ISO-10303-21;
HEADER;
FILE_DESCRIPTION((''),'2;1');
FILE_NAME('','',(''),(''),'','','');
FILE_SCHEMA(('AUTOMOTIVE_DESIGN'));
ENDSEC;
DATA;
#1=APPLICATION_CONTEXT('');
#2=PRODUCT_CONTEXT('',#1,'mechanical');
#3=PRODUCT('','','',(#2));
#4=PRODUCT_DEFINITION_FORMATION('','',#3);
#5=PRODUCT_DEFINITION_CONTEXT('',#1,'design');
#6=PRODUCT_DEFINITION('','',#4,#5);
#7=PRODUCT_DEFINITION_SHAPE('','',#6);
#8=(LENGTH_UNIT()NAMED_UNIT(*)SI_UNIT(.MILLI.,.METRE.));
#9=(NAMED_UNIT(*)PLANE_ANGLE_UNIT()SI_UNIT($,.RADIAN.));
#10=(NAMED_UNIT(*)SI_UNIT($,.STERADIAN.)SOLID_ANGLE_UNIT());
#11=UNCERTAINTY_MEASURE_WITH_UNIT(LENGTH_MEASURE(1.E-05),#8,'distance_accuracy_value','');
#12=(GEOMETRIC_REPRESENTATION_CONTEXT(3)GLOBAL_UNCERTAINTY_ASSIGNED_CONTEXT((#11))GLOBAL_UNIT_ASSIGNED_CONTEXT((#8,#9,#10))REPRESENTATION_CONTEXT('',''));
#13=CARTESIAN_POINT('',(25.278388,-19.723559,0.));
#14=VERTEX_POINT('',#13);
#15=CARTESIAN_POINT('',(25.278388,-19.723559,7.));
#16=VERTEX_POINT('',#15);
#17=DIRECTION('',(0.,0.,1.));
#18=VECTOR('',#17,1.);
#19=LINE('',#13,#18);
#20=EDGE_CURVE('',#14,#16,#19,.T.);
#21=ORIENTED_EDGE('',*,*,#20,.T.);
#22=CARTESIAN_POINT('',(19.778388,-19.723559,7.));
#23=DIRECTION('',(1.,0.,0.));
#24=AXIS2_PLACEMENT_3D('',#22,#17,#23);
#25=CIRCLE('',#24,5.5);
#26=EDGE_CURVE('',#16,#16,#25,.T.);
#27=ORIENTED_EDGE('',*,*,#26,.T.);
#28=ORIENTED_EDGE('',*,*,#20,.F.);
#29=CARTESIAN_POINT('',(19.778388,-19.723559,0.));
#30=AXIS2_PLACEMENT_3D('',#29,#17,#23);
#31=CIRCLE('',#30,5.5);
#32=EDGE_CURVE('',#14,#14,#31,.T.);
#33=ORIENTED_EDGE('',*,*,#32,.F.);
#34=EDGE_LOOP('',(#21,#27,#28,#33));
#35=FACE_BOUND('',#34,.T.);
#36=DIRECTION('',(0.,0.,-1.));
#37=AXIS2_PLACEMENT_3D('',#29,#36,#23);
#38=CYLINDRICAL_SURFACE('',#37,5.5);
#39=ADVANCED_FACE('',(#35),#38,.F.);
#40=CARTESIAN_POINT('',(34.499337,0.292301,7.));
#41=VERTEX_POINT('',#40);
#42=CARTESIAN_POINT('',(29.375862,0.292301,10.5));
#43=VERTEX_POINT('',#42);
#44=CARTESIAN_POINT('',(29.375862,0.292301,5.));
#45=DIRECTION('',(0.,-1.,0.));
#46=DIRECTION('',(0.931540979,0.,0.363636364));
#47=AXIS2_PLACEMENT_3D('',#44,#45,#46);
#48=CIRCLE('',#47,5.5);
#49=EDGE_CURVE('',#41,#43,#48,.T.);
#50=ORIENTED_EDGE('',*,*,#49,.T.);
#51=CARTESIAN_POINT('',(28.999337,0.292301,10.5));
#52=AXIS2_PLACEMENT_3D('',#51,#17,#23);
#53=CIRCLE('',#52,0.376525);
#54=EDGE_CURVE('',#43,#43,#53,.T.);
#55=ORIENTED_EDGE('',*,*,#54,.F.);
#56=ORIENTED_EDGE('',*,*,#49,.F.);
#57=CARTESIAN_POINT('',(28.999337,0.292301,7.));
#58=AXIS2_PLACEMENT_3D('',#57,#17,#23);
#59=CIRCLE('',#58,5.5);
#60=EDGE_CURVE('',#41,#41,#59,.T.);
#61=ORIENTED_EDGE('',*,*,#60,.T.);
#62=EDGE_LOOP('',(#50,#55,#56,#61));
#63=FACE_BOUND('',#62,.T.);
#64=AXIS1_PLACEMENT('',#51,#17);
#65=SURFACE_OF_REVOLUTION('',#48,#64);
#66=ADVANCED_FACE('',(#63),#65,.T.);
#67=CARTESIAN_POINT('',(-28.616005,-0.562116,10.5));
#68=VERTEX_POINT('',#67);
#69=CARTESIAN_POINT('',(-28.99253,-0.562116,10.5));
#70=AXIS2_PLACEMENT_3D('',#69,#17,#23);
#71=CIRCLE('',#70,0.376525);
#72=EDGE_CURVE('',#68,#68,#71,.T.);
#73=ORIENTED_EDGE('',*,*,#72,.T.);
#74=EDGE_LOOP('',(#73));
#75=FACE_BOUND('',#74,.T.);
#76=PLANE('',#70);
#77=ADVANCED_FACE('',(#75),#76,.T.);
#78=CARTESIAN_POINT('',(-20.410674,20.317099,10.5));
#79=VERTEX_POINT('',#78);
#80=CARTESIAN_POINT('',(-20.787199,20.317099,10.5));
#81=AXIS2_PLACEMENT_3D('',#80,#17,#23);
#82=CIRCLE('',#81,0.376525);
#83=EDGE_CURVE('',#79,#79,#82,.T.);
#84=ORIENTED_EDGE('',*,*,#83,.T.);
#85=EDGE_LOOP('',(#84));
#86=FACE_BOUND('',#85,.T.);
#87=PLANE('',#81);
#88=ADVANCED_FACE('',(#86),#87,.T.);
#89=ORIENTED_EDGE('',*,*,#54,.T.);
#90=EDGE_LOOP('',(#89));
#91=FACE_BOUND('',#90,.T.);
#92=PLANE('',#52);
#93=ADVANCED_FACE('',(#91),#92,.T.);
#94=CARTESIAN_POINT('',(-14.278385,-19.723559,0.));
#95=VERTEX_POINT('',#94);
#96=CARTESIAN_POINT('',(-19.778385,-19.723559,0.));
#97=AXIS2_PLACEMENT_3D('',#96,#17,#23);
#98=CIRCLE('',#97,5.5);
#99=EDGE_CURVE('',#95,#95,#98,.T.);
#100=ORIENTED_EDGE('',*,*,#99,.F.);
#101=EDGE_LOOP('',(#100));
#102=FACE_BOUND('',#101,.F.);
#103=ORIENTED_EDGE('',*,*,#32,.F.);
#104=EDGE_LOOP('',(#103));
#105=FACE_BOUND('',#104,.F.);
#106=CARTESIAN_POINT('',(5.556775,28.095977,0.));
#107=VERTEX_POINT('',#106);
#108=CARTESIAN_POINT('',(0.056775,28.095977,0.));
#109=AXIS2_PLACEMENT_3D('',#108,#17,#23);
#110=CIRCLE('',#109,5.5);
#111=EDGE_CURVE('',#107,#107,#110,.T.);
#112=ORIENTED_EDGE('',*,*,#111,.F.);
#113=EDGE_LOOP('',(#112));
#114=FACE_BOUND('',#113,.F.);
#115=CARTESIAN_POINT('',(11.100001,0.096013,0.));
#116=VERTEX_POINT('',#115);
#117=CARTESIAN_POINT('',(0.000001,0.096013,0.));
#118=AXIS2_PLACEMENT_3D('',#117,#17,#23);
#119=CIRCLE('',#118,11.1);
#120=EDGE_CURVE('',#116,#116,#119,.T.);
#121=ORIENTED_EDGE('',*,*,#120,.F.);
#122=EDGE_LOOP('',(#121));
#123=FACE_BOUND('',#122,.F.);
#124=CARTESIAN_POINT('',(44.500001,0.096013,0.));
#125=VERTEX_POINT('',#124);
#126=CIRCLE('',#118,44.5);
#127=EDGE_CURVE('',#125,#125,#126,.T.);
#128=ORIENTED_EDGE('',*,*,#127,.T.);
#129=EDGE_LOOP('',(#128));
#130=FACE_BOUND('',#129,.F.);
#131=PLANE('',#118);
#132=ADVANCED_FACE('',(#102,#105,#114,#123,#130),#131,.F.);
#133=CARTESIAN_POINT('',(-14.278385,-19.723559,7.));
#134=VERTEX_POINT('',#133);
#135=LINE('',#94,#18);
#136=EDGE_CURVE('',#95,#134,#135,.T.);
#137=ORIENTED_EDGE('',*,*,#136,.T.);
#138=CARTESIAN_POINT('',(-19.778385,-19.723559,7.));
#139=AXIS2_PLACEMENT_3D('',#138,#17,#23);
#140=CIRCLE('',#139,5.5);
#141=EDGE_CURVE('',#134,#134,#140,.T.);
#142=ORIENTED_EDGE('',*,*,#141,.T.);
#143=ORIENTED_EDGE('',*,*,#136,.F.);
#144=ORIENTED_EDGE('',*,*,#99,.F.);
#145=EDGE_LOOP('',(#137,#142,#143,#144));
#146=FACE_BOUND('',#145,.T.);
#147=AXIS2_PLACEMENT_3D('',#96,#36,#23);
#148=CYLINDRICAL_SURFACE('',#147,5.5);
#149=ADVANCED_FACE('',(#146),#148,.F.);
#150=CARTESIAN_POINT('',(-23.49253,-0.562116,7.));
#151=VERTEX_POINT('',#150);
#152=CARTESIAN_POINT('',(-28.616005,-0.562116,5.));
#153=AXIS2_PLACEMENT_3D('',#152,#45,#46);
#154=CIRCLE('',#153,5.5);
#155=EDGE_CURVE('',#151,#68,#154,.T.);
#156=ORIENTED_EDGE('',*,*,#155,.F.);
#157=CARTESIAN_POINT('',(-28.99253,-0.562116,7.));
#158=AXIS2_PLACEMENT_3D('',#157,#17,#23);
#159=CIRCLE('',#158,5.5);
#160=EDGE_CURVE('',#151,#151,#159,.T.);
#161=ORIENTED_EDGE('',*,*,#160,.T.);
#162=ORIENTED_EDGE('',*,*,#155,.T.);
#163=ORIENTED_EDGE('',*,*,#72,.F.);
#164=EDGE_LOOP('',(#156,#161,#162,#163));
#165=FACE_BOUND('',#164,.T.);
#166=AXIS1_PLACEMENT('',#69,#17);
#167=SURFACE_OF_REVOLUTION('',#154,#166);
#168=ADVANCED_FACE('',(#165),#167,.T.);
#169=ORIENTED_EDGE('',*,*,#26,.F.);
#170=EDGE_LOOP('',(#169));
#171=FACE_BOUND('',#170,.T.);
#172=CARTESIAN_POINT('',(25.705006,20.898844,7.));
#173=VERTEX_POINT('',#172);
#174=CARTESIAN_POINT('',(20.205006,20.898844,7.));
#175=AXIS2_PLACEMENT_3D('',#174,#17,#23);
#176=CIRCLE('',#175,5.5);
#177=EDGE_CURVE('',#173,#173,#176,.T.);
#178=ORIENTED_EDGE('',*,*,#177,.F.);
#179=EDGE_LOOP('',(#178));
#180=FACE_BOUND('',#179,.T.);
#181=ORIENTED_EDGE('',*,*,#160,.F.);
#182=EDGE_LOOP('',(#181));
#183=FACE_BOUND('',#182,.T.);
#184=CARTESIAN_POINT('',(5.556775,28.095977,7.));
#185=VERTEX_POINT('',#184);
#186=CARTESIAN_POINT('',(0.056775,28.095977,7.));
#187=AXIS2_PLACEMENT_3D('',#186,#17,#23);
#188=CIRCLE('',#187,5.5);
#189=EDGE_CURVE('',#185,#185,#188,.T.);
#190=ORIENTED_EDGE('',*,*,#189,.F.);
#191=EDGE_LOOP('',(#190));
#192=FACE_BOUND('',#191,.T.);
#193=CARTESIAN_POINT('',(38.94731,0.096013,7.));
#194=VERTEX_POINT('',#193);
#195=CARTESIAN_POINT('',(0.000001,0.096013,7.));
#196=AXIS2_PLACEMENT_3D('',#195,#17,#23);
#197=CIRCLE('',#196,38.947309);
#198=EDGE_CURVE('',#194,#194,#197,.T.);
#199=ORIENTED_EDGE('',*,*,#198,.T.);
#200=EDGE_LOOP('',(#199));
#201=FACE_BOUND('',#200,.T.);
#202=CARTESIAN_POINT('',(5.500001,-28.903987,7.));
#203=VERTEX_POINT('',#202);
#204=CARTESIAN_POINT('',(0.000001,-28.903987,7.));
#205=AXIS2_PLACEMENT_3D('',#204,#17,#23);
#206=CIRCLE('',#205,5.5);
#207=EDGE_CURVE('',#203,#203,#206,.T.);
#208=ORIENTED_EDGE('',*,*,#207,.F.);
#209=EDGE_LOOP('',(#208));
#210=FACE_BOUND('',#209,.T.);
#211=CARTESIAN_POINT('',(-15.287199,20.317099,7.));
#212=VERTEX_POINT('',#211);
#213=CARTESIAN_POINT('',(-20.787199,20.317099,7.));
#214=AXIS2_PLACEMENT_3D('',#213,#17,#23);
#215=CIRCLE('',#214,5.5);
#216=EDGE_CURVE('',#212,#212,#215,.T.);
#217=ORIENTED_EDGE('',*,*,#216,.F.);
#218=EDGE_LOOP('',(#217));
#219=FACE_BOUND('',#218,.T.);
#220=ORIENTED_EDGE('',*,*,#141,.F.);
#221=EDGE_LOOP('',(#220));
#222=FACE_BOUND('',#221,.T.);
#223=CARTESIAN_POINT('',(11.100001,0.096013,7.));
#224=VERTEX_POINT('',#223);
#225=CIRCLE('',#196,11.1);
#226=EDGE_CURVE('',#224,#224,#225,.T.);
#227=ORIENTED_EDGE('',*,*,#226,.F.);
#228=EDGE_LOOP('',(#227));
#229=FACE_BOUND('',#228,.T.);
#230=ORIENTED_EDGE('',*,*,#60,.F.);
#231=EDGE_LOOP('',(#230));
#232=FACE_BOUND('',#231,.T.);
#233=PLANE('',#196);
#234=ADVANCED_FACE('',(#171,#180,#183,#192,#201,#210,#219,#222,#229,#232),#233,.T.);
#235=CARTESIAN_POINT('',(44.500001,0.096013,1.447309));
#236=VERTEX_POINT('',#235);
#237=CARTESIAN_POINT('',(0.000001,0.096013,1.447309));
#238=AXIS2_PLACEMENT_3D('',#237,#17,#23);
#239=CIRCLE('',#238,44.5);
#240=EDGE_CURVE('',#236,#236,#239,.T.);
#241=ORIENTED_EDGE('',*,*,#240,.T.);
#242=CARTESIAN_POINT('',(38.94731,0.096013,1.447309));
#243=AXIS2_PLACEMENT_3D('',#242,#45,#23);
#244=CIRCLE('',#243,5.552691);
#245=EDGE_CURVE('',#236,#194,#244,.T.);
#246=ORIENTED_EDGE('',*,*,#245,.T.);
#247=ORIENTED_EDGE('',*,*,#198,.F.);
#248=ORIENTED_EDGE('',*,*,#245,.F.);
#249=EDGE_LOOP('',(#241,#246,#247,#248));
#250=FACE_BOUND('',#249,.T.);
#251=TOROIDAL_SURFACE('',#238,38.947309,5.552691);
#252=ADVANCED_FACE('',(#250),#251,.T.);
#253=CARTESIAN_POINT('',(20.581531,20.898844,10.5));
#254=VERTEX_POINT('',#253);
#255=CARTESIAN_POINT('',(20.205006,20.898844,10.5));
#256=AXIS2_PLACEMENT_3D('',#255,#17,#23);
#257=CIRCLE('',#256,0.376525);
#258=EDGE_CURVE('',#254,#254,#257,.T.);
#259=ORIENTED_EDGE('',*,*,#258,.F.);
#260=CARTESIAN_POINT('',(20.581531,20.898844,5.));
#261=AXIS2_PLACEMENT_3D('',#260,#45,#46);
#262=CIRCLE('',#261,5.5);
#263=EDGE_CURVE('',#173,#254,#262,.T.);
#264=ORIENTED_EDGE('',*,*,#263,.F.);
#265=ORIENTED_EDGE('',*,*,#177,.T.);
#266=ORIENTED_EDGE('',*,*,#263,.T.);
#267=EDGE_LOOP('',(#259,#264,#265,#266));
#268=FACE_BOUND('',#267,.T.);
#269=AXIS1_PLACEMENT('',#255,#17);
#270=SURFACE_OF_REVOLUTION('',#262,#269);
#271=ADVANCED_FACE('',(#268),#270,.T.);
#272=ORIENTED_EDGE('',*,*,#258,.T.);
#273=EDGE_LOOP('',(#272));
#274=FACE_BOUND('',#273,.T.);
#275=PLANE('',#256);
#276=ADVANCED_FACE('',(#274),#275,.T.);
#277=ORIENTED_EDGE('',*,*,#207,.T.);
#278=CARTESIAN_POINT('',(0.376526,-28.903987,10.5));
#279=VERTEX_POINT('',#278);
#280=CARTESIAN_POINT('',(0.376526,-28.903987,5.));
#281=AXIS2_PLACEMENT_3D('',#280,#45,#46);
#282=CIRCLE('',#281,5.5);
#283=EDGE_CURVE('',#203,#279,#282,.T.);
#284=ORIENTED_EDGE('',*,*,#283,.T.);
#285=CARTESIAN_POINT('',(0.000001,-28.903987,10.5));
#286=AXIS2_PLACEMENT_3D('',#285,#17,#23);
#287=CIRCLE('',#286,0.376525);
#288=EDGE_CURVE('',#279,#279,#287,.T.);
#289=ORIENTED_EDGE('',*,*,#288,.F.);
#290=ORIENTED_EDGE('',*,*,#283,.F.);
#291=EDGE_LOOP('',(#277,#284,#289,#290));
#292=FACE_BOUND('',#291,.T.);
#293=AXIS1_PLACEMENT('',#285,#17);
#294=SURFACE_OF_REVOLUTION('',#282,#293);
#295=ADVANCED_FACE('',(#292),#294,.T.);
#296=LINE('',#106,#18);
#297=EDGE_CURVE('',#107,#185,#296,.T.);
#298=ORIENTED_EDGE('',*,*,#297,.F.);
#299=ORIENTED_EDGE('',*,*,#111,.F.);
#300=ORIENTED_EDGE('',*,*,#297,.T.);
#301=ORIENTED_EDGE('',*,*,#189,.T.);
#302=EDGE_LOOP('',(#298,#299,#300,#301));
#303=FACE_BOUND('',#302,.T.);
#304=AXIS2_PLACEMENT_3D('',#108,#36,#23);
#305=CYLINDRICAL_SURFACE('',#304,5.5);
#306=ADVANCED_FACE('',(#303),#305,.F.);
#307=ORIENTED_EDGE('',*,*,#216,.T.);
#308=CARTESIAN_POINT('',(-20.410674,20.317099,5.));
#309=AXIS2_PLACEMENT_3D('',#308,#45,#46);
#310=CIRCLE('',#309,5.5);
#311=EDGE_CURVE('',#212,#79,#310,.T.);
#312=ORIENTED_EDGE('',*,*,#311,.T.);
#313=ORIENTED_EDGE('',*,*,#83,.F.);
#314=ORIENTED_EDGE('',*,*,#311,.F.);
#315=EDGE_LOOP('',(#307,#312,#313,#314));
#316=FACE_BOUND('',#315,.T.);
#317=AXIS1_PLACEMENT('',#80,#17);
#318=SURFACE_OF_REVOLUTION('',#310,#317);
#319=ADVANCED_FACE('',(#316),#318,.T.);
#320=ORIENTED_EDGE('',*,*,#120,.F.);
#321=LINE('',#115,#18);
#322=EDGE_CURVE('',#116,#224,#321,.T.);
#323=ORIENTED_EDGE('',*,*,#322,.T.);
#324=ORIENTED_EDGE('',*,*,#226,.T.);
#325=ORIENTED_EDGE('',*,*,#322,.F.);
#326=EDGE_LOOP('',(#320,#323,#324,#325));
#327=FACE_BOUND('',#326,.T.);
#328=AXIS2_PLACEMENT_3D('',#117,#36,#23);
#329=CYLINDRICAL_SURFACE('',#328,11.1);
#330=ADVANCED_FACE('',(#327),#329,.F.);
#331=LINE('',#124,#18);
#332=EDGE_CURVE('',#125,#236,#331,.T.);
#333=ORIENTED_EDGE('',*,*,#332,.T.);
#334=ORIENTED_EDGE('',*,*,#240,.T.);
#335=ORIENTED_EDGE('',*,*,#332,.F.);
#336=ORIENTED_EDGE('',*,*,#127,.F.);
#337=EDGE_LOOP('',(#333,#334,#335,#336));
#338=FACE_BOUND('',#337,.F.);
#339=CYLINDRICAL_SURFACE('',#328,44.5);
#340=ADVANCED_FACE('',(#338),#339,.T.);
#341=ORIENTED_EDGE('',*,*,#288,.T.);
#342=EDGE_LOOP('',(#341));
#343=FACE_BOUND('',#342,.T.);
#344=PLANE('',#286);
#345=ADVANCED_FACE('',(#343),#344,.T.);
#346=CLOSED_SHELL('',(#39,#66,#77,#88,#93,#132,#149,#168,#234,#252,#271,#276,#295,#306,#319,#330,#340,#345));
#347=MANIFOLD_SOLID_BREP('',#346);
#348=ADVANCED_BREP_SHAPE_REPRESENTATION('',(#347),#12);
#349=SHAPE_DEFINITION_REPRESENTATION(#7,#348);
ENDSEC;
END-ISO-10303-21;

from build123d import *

# Parameters (mm, degrees)
F0_R     = 44.5
F0_R_2   = 5.5
F0_R_3   = 11.1
F1_DEPTH = 7
F2_R     = 5.5526911935
F3_R     = 5.5
F4_DEPTH = 3.5


# Not quite as in the source:
# - a fillet or chamfer that OpenCascade refuses, or shapes differently, is made with other operations: its cross-section is extruded or revolved along the edge and cut away or added


with BuildPart() as f1:
    # F0 (on Top) → F1 (new body)
    with BuildSketch(Plane.XY):
        with Locations((1.3388e-06, 0.0960128228)):
            Circle(F0_R)
        with Locations((-19.7783853119, -19.7235588551)):
            Circle(F0_R_2, mode=Mode.SUBTRACT)
        with Locations((19.7783879895, -19.7235588551)):
            Circle(F0_R_2, mode=Mode.SUBTRACT)
        with Locations((1.3388e-06, 0.0960128228)):
            Circle(F0_R_3, mode=Mode.SUBTRACT)
        with Locations((0.0567746402, 28.095976607)):
            Circle(F0_R_2, mode=Mode.SUBTRACT)
    extrude(amount=F1_DEPTH)

    # F2
    f2_edges = [f1.edges().sort_by_distance(p)[0] for p in [
        (-44.499999, 0.096013, 7),
    ]]
    fillet(f2_edges, radius=F2_R)

    # F3 (on face) → F4 (join)
    with BuildSketch(Plane.XY.offset(7)):
        with Locations((20.2050062432, 20.8988438036)):
            Circle(F3_R)
        with Locations((28.9993370366, 0.292301098)):
            Circle(F3_R)
        with Locations((1.3388e-06, -28.9039871772)):
            Circle(F3_R)
        with Locations((-28.9925298787, -0.5621160422)):
            Circle(F3_R)
        with Locations((-20.7871988103, 20.3170985988)):
            Circle(F3_R)
    extrude(amount=F4_DEPTH)

    # F5: fillet of radius 5.5 on 5 edges, made by hand

    # F5_s1 → F5_t2 (revolve, cut)
    with BuildSketch(Plane.XZ.offset(0.5621160422)):
        with BuildLine():
            ThreePointArc((-23.4925298787, 7), (-25.5135868502, 9.5414755311), (-28.6160052617, 10.5))
            Line((-28.6160052617, 10.5), (-23.4925298787, 10.5))
            Line((-23.4925298787, 10.5), (-23.4925298787, 7))
        make_face()
    revolve(axis=Axis((-28.9925298787, -0.5621160422, 10.5), (0, 0, 1)), mode=Mode.SUBTRACT)

    # F5_s3 → F5_t4 (revolve, cut)
    with BuildSketch(Plane.XZ.offset(-20.3170985988)):
        with BuildLine():
            ThreePointArc((-15.2871988103, 7), (-17.3082557818, 9.5414755311), (-20.4106741933, 10.5))
            Line((-20.4106741933, 10.5), (-15.2871988103, 10.5))
            Line((-15.2871988103, 10.5), (-15.2871988103, 7))
        make_face()
    revolve(axis=Axis((-20.7871988103, 20.3170985988, 10.5), (0, 0, 1)), mode=Mode.SUBTRACT)

    # F5_s5 → F5_t6 (revolve, cut)
    with BuildSketch(Plane.XZ.offset(-20.8988438036)):
        with BuildLine():
            ThreePointArc((25.7050062432, 7), (23.6839492717, 9.5414755311), (20.5815308602, 10.5))
            Line((20.5815308602, 10.5), (25.7050062432, 10.5))
            Line((25.7050062432, 10.5), (25.7050062432, 7))
        make_face()
    revolve(axis=Axis((20.2050062432, 20.8988438036, 10.5), (0, 0, 1)), mode=Mode.SUBTRACT)

    # F5_s7 → F5_t8 (revolve, cut)
    with BuildSketch(Plane.XZ.offset(-0.292301098)):
        with BuildLine():
            ThreePointArc((34.4993370366, 7), (32.4782800651, 9.5414755311), (29.3758616536, 10.5))
            Line((29.3758616536, 10.5), (34.4993370366, 10.5))
            Line((34.4993370366, 10.5), (34.4993370366, 7))
        make_face()
    revolve(axis=Axis((28.9993370366, 0.292301098, 10.5), (0, 0, 1)), mode=Mode.SUBTRACT)

    # F5_s9 → F5_t10 (revolve, cut)
    with BuildSketch(Plane.XZ.offset(28.9039871772)):
        with BuildLine():
            ThreePointArc((5.5000013388, 7), (3.4789443673, 9.5414755311), (0.3765259558, 10.5))
            Line((0.3765259558, 10.5), (5.5000013388, 10.5))
            Line((5.5000013388, 10.5), (5.5000013388, 7))
        make_face()
    revolve(axis=Axis((1.3388e-06, -28.9039871772, 10.5), (0, 0, 1)), mode=Mode.SUBTRACT)


solid = f1.part
